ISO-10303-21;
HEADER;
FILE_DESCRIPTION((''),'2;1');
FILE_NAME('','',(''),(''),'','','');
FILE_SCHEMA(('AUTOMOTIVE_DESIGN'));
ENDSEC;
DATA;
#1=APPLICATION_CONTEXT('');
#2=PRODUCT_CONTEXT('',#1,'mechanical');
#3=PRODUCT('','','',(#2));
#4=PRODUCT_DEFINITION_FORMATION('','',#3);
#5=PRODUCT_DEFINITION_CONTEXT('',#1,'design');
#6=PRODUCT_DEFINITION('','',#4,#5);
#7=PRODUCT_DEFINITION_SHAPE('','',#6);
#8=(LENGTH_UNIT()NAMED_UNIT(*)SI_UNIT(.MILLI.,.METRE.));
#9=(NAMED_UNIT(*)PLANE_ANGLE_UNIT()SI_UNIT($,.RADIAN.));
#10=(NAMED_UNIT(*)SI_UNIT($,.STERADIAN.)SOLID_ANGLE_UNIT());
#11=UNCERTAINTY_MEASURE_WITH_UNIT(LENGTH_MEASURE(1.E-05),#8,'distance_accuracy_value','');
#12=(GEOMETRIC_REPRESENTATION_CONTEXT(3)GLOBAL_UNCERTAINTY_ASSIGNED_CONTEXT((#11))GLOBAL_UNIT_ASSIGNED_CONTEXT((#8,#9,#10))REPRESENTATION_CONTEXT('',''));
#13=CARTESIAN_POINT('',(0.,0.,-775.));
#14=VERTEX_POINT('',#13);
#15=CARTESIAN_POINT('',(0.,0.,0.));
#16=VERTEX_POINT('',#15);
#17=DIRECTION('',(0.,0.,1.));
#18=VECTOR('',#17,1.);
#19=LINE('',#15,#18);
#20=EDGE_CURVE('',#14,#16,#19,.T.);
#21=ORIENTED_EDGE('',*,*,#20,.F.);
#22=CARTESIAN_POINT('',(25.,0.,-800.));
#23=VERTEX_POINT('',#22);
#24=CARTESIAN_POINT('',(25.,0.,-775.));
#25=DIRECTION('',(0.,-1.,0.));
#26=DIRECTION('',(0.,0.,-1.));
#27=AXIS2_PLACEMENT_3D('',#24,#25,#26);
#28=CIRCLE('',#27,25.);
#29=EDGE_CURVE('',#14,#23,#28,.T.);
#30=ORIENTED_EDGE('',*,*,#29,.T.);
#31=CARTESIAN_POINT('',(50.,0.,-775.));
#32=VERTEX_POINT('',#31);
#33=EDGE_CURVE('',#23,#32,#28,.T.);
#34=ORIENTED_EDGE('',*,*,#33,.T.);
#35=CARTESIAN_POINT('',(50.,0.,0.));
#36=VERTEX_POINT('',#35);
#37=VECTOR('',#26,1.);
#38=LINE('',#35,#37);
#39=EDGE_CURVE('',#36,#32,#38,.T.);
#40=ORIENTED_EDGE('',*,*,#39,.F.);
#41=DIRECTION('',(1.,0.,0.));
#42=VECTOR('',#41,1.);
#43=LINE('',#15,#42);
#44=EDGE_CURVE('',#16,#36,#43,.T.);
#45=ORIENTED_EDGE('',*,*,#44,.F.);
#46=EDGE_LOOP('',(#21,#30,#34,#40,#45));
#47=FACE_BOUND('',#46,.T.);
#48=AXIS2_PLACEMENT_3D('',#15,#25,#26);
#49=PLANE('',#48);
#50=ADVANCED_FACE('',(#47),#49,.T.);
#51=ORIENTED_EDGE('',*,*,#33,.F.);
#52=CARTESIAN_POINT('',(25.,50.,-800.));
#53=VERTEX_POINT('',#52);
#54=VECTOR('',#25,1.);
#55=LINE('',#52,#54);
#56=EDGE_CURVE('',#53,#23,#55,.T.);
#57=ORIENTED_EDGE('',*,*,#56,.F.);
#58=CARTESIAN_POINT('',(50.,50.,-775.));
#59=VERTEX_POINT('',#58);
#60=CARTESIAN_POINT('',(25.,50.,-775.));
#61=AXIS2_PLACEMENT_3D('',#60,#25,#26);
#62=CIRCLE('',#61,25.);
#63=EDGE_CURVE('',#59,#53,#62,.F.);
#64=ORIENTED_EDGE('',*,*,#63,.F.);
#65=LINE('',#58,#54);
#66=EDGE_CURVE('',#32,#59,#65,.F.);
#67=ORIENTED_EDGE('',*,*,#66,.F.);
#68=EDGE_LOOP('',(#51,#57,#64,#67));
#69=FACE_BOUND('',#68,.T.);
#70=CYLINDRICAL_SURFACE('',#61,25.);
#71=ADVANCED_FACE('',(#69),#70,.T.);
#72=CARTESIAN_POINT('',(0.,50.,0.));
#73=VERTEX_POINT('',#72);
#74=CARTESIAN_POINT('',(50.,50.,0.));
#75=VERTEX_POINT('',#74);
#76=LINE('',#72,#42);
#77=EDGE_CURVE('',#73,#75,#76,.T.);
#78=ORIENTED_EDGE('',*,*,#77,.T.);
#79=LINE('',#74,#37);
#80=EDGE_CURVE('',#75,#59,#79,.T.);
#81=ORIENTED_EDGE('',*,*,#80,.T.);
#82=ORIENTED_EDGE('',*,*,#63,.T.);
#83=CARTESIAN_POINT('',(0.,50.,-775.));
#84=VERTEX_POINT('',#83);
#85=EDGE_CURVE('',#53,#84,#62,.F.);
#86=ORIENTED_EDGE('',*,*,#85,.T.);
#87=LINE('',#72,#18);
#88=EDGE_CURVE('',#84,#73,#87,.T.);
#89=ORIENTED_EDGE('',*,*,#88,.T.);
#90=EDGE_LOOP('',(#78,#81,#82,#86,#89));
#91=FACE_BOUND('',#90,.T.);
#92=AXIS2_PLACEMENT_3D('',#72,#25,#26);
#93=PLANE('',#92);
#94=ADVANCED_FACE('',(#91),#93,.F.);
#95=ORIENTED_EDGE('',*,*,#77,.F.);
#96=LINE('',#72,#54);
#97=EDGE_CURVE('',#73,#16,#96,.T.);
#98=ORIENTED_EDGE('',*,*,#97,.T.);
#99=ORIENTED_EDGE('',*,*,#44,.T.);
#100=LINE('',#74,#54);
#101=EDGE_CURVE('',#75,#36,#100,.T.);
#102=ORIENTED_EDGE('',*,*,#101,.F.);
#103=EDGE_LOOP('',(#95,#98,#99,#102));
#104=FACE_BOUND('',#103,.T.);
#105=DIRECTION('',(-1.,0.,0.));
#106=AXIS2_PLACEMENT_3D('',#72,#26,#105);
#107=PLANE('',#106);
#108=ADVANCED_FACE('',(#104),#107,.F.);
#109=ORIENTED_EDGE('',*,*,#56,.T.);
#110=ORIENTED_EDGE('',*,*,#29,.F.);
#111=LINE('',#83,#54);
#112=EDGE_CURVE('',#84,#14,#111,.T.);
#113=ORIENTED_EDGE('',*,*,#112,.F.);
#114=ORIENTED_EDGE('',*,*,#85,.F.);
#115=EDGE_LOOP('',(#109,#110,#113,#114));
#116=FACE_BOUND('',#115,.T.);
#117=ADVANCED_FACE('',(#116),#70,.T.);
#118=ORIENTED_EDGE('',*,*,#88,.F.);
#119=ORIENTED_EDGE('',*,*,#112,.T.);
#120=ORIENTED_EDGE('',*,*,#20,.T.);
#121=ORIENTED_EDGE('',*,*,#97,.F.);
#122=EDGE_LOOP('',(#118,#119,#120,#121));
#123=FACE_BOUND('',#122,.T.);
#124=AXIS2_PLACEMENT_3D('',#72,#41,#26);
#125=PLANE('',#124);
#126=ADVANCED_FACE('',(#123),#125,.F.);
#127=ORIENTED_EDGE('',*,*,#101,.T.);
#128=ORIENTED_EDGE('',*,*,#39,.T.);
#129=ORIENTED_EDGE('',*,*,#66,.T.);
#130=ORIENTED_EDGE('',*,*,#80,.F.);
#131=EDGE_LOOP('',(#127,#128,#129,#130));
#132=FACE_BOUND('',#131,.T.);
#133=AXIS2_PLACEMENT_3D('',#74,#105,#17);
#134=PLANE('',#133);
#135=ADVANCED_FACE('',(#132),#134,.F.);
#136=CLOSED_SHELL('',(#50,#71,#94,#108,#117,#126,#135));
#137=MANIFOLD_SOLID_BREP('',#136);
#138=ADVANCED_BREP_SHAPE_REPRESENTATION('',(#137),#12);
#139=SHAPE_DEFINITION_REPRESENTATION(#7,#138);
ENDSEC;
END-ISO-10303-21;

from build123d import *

# Parameters (mm, degrees)
SKETCH_1_W      = 50
SKETCH_1_H      = 800
EXTRUDE_1_DEPTH = 50
FILLET_1_R      = 25


with BuildPart() as part:
    # 草图1 → 凸台-拉伸1 (new body)
    with BuildSketch(Plane(origin=(0, 0, 0), x_dir=(1, 0, 0), z_dir=(0, 1, 0))):
        with Locations((25, 400)):
            Rectangle(SKETCH_1_W, SKETCH_1_H)
    extrude(amount=EXTRUDE_1_DEPTH)

    # 圆角1
    fillet_1_edges = [part.edges().sort_by_distance(p)[0] for p in [
        (0, 25, -800),
        (50, 25, -800),
    ]]
    fillet(fillet_1_edges, radius=FILLET_1_R - 0.0001)  # a hair under: the kernel refuses the full size


solid = part.part
